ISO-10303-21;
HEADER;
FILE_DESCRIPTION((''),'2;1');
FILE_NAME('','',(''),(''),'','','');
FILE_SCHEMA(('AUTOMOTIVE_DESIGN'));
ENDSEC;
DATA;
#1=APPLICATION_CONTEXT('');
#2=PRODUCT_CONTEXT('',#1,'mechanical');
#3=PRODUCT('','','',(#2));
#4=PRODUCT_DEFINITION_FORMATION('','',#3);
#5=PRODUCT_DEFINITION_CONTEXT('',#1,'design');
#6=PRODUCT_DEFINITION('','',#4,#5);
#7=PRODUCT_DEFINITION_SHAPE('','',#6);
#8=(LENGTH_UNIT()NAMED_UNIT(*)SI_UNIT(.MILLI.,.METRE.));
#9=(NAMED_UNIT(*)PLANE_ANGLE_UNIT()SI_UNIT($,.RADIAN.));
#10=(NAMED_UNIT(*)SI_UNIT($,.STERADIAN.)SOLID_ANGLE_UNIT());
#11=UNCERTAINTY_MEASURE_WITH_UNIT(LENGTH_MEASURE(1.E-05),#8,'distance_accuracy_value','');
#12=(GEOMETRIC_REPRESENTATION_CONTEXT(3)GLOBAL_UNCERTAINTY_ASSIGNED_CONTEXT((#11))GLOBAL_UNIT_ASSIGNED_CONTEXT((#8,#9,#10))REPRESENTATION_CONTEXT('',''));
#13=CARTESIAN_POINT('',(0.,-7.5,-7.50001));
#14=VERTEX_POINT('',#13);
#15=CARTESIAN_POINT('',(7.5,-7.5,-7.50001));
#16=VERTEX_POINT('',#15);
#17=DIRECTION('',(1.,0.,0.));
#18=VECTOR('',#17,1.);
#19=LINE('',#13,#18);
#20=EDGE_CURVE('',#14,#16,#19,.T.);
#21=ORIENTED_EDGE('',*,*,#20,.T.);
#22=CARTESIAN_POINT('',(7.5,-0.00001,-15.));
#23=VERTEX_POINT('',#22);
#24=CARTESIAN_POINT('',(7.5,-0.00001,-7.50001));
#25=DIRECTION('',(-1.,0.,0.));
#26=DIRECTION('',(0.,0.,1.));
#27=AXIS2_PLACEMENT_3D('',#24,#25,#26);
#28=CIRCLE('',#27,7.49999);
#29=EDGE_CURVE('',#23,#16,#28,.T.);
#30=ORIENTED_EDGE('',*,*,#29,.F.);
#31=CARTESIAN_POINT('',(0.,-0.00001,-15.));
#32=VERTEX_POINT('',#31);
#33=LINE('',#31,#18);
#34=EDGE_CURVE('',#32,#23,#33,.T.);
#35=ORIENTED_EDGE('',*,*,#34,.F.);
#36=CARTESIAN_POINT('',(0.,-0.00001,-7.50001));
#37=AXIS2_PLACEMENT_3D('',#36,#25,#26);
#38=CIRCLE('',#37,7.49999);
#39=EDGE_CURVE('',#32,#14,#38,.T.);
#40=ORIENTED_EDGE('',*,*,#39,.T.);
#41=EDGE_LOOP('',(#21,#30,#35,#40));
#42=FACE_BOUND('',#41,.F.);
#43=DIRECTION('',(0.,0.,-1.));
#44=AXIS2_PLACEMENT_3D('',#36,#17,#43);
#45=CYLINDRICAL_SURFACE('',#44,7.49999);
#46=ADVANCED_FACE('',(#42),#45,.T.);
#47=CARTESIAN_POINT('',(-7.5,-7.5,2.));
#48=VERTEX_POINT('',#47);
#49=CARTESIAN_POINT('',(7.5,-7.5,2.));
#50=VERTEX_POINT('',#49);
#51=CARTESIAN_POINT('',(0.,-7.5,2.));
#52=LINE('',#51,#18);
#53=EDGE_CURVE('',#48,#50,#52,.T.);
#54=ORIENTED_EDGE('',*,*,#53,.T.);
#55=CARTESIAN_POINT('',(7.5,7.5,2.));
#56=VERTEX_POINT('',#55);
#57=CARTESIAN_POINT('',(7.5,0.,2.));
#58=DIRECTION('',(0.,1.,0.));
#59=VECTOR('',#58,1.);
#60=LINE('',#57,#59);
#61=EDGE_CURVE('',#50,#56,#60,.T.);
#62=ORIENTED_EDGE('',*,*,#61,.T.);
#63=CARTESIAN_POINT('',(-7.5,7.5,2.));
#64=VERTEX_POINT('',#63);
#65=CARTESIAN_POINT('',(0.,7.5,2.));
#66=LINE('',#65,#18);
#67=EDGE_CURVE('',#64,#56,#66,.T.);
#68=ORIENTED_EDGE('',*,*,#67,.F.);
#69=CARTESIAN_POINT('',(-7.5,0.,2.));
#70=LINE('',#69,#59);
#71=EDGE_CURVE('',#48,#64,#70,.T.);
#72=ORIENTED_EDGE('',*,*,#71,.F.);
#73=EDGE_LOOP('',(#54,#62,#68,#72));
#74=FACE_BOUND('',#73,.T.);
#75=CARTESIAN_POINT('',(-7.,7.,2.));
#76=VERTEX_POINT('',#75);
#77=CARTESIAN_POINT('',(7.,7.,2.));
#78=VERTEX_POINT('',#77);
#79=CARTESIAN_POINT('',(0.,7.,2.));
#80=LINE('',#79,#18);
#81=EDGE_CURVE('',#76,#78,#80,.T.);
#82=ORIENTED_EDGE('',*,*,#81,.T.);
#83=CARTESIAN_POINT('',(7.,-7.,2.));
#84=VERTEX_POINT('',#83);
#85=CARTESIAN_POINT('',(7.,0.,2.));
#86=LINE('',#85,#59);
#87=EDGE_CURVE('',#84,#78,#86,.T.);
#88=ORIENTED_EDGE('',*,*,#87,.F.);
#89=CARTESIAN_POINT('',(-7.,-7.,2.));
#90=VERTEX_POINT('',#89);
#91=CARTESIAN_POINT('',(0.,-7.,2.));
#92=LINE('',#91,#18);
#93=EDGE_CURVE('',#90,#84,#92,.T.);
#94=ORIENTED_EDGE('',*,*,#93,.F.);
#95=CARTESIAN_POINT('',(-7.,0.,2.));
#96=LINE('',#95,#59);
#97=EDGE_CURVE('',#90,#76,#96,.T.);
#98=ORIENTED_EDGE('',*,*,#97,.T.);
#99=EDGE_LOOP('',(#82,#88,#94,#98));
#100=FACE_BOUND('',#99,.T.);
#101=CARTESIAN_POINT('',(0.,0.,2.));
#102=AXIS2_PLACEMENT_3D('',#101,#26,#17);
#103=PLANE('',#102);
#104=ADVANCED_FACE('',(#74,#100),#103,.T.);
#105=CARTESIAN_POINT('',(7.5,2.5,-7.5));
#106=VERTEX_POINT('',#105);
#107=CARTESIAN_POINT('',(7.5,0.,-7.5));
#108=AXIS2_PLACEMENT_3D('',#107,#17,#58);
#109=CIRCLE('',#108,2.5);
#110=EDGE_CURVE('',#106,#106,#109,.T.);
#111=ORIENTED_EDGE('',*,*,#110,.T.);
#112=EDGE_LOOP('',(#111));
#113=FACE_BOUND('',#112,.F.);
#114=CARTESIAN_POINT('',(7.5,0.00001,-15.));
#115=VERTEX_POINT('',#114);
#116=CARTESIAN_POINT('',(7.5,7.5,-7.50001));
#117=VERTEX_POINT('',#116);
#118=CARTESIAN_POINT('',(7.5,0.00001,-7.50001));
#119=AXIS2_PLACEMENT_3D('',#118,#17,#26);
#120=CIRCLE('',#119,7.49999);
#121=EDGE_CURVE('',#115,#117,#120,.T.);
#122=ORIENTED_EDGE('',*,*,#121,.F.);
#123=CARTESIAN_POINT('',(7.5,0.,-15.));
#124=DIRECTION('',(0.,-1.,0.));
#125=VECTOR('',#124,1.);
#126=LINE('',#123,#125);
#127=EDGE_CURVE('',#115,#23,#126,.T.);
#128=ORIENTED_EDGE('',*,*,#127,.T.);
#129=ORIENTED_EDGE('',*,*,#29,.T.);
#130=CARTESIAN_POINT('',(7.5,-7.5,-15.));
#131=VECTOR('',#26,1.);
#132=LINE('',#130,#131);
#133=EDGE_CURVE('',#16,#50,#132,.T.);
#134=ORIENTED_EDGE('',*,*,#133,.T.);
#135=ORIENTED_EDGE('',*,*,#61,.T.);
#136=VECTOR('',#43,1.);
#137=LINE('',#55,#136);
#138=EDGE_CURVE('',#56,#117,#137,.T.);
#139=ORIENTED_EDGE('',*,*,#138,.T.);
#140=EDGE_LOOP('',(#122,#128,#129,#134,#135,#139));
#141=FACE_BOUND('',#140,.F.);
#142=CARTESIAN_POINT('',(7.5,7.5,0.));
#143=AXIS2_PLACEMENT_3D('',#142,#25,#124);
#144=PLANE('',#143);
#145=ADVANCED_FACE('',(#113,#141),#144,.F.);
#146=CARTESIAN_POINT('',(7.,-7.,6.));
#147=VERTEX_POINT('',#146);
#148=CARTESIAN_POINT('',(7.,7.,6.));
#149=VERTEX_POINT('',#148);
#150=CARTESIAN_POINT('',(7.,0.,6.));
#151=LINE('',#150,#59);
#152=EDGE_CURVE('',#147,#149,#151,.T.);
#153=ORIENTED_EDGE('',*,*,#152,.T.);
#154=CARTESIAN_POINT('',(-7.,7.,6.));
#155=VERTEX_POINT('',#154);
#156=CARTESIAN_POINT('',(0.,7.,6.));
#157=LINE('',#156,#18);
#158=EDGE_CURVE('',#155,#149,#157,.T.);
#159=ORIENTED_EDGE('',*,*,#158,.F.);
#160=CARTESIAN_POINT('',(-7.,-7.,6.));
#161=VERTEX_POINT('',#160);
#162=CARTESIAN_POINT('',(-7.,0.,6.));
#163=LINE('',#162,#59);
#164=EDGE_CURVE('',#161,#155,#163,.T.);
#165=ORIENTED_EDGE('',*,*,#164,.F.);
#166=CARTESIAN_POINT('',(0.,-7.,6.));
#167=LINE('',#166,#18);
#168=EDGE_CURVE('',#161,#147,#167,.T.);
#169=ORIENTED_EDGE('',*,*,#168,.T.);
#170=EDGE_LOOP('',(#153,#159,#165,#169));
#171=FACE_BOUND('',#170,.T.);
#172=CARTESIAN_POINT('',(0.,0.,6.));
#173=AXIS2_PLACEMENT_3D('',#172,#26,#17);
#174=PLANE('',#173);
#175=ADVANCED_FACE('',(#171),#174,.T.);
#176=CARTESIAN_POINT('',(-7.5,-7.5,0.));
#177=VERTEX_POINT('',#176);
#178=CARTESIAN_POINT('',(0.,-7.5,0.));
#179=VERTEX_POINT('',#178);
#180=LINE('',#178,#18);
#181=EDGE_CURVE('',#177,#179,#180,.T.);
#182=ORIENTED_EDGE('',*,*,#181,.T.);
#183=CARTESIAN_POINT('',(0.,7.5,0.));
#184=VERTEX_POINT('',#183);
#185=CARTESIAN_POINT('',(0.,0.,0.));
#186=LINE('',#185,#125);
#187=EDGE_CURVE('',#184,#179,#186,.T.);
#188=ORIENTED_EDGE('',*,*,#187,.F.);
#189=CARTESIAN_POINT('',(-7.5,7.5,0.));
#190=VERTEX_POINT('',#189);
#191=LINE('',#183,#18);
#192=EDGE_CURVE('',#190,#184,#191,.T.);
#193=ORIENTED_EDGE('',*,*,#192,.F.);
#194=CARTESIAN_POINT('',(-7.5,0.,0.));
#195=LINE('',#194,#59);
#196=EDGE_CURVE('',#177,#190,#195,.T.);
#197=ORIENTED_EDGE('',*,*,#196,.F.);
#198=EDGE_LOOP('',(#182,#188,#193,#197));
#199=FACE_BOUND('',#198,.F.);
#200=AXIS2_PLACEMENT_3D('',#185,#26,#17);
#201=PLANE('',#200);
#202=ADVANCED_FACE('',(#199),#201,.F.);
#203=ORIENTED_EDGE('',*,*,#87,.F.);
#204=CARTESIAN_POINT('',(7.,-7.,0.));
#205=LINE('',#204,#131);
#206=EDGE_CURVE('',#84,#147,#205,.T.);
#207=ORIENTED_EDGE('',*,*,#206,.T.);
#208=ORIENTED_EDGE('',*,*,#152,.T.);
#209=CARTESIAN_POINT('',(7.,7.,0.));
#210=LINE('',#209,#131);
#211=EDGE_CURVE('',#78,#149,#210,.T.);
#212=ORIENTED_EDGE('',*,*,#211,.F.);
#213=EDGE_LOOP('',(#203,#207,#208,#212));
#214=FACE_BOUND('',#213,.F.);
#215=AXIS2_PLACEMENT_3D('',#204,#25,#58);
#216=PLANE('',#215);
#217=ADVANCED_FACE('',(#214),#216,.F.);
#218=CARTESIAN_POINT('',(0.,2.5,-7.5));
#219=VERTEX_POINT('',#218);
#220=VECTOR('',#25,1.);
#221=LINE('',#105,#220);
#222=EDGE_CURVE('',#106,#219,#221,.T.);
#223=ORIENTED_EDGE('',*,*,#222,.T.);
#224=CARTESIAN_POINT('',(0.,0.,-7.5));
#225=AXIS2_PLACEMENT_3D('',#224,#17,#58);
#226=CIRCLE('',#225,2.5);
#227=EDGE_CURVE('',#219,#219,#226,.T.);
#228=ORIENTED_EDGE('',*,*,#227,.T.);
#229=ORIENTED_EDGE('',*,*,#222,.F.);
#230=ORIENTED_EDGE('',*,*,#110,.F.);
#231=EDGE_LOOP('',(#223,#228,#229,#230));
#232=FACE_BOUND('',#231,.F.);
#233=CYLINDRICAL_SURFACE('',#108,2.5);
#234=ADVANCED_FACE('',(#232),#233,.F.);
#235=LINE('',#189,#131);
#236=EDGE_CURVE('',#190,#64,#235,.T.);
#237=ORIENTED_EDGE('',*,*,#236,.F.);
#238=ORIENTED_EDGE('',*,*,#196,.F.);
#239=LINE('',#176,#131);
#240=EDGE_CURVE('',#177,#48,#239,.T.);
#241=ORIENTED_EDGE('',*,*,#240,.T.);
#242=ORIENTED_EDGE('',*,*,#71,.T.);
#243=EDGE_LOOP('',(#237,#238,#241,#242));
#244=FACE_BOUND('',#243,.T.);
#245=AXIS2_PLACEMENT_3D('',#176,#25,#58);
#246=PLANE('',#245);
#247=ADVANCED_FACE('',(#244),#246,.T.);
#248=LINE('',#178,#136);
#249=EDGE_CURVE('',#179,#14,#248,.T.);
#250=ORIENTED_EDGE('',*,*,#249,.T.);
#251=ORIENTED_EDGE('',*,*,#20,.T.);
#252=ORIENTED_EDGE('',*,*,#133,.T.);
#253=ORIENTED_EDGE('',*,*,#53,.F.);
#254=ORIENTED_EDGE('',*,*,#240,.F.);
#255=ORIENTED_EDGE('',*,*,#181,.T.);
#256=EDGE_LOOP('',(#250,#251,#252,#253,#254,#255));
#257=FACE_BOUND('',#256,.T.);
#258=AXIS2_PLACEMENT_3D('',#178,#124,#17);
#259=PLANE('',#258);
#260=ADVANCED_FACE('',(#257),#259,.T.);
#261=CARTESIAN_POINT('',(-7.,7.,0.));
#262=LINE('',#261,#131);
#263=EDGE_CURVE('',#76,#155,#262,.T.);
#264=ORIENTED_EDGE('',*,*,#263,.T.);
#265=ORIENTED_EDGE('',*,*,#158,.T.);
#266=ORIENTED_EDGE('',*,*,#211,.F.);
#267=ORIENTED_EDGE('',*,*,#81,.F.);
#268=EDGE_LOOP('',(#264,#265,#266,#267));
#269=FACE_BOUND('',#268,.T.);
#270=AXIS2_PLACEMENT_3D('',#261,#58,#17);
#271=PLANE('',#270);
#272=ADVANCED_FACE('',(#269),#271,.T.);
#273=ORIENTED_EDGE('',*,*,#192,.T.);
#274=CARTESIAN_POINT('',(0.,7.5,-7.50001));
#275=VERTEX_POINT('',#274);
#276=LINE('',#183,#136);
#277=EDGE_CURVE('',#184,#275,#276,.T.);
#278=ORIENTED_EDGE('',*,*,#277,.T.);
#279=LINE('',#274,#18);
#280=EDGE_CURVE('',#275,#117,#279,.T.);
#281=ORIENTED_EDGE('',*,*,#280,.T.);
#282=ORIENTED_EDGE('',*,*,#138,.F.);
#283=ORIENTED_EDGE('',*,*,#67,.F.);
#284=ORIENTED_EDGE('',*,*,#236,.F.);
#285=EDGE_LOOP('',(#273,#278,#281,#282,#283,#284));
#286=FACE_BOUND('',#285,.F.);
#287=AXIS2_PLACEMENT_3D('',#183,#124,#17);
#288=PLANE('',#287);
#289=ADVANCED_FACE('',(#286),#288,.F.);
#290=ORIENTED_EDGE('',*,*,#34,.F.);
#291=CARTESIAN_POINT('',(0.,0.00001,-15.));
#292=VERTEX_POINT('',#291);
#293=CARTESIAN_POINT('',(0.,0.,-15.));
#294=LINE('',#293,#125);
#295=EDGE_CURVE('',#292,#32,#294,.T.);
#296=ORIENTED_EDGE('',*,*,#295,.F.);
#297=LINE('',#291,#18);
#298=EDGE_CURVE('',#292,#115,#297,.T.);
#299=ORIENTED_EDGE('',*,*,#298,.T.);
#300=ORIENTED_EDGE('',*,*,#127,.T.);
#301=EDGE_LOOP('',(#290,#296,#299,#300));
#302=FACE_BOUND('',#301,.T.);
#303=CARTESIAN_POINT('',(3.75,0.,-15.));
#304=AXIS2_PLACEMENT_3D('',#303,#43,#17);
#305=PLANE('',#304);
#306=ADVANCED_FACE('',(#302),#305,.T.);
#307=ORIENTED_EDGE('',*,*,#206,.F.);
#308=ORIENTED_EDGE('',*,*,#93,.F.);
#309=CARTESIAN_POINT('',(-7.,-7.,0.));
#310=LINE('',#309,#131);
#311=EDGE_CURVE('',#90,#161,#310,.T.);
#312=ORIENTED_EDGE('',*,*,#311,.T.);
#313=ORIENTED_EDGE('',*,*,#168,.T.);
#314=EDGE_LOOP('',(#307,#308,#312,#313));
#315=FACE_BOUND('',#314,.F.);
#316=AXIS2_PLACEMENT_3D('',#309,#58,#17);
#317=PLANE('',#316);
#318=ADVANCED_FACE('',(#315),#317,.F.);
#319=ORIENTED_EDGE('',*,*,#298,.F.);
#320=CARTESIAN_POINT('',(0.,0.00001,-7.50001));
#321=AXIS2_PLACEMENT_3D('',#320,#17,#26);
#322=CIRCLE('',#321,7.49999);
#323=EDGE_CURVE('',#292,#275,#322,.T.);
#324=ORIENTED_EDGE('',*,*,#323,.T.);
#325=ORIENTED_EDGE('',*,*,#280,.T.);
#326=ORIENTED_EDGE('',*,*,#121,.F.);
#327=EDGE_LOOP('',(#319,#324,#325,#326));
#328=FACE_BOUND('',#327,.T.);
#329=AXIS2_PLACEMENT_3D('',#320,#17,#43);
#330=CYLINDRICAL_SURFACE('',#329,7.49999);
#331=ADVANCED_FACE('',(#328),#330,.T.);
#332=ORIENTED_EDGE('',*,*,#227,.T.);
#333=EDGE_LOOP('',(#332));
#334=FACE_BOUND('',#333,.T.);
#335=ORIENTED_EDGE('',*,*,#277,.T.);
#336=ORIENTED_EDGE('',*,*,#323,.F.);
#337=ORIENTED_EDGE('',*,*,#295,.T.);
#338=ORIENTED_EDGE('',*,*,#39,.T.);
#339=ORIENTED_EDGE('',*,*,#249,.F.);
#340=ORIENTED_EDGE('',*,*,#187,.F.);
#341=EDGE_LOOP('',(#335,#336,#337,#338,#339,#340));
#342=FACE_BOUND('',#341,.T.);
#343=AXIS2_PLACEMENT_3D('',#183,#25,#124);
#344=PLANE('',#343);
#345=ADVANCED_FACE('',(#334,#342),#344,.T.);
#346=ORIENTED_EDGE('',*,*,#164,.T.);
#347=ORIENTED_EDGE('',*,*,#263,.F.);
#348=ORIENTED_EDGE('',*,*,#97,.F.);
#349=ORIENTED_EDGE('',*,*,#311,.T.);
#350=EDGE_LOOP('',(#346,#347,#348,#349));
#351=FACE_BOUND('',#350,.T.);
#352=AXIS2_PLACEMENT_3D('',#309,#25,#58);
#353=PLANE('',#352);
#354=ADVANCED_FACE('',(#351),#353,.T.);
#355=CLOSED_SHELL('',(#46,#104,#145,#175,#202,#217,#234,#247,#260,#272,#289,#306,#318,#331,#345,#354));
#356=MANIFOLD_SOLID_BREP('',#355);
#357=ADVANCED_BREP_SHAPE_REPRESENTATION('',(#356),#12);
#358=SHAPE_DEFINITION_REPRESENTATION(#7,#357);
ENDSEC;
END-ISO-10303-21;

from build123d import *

# Parameters (mm, degrees)
F0_W     = 15
F0_H     = 15
F0_W_2   = 14
F0_H_2   = 14
F1_DEPTH = 2
F2_DEPTH = 6
F3_W     = 7.5
F3_H     = 15
F4_DEPTH = 15
F5_R     = 7.49999
F6_R     = 2.5
F7_DEPTH = 25


# Not quite as in the source:
# - a fillet or chamfer is up to 0.001 mm smaller than in the source, because OpenCascade refuses the exact size


with BuildPart() as f1:
    # F0 (on Top) → F1 (new body)
    with BuildSketch(Plane.XY):
        Rectangle(F0_W, F0_H)
        Rectangle(F0_W_2, F0_H_2, mode=Mode.SUBTRACT)
    extrude(amount=F1_DEPTH)

    # F0 (on Top) → F2 (join)
    with BuildSketch(Plane.XY):
        Rectangle(F0_W_2, F0_H_2)
    extrude(amount=F2_DEPTH)

    # F3 (on face) → F4 (join)
    with BuildSketch(Plane(origin=(0, 0, 0), x_dir=(1, 0, 0), z_dir=(0, 0, -1))):
        with Locations((3.75, 0)):
            Rectangle(F3_W, F3_H)
    extrude(amount=F4_DEPTH)

    # F5 (radius 7.5 in the source; OpenCascade refuses exactly that, so slightly less here)
    f5_edges = [f1.edges().sort_by_distance(p)[0] for p in [
        (3.75, 7.5, -15),
        (3.75, -7.5, -15),
    ]]
    fillet(f5_edges, radius=F5_R)

    # F6 (on face) → F7 (cut)
    with BuildSketch(Plane.YZ.offset(7.5)):
        with Locations((0, -7.5)):
            Circle(F6_R)
    extrude(amount=-F7_DEPTH, mode=Mode.SUBTRACT)


solid = f1.part
